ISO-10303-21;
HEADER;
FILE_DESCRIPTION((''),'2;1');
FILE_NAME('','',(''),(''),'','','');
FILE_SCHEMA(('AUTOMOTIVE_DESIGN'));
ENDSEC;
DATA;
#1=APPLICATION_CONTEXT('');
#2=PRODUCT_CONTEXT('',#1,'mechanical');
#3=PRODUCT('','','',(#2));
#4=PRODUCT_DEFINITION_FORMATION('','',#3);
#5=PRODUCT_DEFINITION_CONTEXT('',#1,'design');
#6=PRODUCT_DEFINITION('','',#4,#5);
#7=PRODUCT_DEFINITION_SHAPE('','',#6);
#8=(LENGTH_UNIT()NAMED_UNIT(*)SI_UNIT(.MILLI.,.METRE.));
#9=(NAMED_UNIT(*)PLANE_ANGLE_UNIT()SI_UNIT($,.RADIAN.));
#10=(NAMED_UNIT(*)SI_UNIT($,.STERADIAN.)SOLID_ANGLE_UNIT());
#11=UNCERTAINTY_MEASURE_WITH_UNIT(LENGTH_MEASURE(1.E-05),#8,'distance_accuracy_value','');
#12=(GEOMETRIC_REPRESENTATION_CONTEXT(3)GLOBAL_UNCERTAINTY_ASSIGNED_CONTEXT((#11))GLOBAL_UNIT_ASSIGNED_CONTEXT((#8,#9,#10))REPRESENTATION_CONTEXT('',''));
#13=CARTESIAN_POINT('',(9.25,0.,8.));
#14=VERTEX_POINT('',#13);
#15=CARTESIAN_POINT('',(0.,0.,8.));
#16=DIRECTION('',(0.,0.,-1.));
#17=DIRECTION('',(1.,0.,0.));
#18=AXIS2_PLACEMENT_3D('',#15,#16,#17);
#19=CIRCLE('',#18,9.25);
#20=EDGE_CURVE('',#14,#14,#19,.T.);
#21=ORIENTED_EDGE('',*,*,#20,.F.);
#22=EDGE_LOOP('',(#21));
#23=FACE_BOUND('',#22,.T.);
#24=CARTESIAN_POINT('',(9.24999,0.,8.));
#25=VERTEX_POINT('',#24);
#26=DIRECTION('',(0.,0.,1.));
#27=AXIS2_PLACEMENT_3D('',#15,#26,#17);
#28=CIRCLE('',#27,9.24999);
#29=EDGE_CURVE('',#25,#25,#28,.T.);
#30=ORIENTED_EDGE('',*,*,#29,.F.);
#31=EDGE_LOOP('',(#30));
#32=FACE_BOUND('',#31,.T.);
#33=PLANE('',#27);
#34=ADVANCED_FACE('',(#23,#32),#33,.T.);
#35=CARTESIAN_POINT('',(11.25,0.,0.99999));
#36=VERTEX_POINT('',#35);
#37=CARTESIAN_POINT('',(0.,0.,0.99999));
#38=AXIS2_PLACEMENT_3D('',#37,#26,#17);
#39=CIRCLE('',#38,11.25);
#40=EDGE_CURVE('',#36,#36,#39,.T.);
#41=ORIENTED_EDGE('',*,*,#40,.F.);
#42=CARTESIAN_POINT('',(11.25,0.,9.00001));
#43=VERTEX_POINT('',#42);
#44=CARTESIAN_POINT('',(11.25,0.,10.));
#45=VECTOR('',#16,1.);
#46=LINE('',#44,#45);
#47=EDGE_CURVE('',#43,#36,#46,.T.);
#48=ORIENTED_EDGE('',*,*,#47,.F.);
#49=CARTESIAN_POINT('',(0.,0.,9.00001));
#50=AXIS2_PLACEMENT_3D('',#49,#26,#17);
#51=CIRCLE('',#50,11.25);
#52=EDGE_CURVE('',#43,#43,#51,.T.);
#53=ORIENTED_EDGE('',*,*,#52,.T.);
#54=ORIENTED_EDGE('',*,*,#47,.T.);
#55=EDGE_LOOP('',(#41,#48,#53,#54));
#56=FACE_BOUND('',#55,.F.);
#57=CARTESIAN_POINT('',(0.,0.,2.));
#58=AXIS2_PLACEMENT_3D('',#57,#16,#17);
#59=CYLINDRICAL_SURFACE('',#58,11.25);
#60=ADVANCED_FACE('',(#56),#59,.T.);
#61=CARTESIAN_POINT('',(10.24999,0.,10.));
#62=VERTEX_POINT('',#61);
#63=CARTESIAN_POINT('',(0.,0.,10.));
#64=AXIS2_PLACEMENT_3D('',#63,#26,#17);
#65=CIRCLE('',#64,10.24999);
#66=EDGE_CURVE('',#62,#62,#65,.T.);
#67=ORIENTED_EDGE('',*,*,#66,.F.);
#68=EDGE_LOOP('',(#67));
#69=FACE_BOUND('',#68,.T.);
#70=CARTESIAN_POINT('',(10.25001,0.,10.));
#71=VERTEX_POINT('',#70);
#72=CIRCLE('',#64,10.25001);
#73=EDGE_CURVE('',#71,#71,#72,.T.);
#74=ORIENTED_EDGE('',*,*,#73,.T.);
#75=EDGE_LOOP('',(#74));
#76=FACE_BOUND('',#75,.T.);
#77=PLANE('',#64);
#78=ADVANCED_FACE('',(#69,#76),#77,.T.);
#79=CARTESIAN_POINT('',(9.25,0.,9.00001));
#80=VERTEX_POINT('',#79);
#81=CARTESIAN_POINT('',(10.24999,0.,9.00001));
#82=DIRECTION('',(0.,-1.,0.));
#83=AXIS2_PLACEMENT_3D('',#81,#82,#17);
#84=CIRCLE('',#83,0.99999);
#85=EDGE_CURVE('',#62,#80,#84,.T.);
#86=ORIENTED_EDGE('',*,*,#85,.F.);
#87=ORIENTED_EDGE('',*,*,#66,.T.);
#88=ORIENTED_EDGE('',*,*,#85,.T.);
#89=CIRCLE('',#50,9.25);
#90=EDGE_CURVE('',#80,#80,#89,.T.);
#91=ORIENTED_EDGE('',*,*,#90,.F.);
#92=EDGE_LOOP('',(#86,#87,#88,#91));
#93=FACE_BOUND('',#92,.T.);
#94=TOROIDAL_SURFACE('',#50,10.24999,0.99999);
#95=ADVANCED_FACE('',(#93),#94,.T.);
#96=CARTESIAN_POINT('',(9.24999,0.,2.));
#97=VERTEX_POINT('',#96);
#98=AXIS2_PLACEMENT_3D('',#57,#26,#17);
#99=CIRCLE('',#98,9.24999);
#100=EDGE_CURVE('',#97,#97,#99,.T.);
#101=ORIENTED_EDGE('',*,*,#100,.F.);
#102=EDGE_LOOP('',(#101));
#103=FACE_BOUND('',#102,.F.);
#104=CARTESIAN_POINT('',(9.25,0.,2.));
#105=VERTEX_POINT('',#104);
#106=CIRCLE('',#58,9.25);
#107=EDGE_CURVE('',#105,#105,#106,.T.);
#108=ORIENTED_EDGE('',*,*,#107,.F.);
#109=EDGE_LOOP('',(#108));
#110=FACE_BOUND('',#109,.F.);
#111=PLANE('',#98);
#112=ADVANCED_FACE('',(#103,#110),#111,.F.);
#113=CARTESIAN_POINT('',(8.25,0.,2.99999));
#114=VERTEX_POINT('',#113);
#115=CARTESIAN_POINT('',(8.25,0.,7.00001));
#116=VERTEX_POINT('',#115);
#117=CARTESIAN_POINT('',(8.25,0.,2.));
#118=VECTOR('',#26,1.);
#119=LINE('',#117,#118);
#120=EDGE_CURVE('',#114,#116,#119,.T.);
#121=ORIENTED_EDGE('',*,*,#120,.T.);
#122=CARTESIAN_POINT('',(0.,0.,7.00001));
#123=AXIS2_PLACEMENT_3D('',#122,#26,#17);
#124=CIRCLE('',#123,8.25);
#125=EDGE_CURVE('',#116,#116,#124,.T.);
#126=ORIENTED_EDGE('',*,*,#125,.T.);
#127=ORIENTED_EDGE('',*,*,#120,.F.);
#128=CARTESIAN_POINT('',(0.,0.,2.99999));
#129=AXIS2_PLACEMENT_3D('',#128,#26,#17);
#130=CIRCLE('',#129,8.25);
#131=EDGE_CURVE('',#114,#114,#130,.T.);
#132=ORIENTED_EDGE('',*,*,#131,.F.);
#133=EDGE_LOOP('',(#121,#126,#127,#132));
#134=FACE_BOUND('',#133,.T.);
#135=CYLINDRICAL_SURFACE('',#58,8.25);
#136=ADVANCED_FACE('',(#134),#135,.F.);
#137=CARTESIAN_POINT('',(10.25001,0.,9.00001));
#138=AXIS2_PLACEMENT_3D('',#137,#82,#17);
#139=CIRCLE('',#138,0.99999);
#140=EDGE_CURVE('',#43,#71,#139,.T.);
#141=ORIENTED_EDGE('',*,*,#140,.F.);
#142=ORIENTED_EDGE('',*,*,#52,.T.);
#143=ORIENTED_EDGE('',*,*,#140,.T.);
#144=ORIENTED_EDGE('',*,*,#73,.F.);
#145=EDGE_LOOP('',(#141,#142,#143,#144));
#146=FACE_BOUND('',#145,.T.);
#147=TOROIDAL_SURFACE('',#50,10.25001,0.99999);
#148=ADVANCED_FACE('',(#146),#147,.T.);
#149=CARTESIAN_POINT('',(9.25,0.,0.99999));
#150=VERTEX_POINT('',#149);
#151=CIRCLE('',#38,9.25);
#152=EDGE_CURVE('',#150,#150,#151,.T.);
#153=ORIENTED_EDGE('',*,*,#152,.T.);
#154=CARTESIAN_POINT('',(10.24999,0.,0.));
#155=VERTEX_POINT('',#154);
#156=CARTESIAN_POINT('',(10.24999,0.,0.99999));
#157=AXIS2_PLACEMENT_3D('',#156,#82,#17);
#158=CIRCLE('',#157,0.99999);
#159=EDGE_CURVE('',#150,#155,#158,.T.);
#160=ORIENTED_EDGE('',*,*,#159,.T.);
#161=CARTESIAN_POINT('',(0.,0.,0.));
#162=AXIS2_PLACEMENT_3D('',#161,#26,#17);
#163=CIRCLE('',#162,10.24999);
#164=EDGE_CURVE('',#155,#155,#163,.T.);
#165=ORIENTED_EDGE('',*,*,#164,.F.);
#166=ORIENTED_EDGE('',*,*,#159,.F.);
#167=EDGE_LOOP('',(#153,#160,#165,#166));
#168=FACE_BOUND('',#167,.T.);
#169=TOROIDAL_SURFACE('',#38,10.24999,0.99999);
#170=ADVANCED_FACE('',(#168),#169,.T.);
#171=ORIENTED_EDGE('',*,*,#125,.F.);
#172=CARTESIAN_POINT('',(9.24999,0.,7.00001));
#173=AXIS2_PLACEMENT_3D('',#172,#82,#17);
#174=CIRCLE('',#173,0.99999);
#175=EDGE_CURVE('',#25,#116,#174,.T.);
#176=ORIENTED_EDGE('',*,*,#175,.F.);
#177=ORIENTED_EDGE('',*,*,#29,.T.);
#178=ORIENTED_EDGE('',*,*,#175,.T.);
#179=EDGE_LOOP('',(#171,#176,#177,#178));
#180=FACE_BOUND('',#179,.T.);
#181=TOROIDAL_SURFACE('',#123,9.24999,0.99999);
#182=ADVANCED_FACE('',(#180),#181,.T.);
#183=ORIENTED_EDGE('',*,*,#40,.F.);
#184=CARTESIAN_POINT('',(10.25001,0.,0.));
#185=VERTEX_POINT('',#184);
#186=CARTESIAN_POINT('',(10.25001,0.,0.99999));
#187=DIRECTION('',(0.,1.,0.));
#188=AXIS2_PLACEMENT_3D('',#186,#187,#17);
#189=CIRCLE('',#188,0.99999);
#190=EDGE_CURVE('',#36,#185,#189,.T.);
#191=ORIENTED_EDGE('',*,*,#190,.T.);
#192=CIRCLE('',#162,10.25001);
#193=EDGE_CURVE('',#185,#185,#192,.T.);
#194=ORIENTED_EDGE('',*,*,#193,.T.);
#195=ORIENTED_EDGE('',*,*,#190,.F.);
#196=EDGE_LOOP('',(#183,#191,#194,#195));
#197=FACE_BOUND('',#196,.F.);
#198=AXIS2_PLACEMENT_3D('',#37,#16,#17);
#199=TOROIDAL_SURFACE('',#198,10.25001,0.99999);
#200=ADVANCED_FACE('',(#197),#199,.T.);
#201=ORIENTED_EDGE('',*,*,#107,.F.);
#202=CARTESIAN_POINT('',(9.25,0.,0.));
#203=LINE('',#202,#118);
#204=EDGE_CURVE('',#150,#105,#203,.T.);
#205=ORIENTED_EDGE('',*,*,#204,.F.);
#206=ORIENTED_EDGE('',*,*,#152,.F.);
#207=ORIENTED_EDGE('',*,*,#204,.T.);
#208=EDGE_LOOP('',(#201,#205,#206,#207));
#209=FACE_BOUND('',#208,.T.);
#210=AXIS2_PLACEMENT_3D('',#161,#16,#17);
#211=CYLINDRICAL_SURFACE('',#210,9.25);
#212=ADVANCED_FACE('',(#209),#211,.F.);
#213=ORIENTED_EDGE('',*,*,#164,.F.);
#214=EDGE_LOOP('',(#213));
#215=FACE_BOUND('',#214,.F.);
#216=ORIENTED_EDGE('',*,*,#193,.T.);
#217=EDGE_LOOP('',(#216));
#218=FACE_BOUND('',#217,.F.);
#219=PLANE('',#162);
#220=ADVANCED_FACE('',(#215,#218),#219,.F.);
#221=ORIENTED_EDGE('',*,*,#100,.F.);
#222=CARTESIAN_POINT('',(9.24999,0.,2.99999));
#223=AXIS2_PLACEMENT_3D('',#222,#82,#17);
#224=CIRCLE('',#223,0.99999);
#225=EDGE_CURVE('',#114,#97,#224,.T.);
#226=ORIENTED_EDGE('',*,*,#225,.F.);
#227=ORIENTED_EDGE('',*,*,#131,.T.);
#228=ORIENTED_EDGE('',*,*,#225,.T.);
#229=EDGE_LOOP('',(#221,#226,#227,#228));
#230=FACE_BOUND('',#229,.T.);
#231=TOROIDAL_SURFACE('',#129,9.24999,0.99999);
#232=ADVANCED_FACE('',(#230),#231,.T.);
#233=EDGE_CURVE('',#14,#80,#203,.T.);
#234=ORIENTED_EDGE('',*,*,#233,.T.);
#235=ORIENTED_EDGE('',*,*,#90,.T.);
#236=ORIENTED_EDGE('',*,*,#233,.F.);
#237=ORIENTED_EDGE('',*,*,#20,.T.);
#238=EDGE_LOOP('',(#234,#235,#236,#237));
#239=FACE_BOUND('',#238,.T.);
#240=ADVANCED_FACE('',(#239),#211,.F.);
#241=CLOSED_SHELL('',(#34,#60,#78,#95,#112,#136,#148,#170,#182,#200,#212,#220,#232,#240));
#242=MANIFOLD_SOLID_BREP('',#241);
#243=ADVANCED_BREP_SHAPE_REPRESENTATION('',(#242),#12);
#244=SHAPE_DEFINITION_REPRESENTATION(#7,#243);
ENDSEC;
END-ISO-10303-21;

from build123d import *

# Parameters (mm, degrees)
F0_R     = 11.25
F0_R_2   = 9.25
F1_DEPTH = 10
F3_R     = 11.25
F3_R_2   = 8.25
F4_DEPTH = 6
F5_R     = 0.99999


# Not quite as in the source:
# - a fillet or chamfer is up to 0.001 mm smaller than in the source, because OpenCascade refuses the exact size


with BuildPart() as f1:
    # F0 (on Top) → F1 (new body)
    with BuildSketch(Plane.XY):
        Circle(F0_R)
        Circle(F0_R_2, mode=Mode.SUBTRACT)
    extrude(amount=F1_DEPTH)

    # F3 (on offset) → F4 (join)
    with BuildSketch(Plane.XY.offset(2)):
        Circle(F3_R)
        Circle(F3_R_2, mode=Mode.SUBTRACT)
    extrude(amount=F4_DEPTH)

    # F5 (radius 1 in the source; OpenCascade refuses exactly that, so slightly less here)
    f5_edges = [f1.edges().sort_by_distance(p)[0] for p in [
        (-8.25, 0, 2),
        (-8.25, 0, 8),
        (-9.25, 0, 10),
        (-11.25, 0, 10),
        (-11.25, 0, 0),
        (-9.25, 0, 0),
    ]]
    fillet(f5_edges, radius=F5_R)


solid = f1.part
